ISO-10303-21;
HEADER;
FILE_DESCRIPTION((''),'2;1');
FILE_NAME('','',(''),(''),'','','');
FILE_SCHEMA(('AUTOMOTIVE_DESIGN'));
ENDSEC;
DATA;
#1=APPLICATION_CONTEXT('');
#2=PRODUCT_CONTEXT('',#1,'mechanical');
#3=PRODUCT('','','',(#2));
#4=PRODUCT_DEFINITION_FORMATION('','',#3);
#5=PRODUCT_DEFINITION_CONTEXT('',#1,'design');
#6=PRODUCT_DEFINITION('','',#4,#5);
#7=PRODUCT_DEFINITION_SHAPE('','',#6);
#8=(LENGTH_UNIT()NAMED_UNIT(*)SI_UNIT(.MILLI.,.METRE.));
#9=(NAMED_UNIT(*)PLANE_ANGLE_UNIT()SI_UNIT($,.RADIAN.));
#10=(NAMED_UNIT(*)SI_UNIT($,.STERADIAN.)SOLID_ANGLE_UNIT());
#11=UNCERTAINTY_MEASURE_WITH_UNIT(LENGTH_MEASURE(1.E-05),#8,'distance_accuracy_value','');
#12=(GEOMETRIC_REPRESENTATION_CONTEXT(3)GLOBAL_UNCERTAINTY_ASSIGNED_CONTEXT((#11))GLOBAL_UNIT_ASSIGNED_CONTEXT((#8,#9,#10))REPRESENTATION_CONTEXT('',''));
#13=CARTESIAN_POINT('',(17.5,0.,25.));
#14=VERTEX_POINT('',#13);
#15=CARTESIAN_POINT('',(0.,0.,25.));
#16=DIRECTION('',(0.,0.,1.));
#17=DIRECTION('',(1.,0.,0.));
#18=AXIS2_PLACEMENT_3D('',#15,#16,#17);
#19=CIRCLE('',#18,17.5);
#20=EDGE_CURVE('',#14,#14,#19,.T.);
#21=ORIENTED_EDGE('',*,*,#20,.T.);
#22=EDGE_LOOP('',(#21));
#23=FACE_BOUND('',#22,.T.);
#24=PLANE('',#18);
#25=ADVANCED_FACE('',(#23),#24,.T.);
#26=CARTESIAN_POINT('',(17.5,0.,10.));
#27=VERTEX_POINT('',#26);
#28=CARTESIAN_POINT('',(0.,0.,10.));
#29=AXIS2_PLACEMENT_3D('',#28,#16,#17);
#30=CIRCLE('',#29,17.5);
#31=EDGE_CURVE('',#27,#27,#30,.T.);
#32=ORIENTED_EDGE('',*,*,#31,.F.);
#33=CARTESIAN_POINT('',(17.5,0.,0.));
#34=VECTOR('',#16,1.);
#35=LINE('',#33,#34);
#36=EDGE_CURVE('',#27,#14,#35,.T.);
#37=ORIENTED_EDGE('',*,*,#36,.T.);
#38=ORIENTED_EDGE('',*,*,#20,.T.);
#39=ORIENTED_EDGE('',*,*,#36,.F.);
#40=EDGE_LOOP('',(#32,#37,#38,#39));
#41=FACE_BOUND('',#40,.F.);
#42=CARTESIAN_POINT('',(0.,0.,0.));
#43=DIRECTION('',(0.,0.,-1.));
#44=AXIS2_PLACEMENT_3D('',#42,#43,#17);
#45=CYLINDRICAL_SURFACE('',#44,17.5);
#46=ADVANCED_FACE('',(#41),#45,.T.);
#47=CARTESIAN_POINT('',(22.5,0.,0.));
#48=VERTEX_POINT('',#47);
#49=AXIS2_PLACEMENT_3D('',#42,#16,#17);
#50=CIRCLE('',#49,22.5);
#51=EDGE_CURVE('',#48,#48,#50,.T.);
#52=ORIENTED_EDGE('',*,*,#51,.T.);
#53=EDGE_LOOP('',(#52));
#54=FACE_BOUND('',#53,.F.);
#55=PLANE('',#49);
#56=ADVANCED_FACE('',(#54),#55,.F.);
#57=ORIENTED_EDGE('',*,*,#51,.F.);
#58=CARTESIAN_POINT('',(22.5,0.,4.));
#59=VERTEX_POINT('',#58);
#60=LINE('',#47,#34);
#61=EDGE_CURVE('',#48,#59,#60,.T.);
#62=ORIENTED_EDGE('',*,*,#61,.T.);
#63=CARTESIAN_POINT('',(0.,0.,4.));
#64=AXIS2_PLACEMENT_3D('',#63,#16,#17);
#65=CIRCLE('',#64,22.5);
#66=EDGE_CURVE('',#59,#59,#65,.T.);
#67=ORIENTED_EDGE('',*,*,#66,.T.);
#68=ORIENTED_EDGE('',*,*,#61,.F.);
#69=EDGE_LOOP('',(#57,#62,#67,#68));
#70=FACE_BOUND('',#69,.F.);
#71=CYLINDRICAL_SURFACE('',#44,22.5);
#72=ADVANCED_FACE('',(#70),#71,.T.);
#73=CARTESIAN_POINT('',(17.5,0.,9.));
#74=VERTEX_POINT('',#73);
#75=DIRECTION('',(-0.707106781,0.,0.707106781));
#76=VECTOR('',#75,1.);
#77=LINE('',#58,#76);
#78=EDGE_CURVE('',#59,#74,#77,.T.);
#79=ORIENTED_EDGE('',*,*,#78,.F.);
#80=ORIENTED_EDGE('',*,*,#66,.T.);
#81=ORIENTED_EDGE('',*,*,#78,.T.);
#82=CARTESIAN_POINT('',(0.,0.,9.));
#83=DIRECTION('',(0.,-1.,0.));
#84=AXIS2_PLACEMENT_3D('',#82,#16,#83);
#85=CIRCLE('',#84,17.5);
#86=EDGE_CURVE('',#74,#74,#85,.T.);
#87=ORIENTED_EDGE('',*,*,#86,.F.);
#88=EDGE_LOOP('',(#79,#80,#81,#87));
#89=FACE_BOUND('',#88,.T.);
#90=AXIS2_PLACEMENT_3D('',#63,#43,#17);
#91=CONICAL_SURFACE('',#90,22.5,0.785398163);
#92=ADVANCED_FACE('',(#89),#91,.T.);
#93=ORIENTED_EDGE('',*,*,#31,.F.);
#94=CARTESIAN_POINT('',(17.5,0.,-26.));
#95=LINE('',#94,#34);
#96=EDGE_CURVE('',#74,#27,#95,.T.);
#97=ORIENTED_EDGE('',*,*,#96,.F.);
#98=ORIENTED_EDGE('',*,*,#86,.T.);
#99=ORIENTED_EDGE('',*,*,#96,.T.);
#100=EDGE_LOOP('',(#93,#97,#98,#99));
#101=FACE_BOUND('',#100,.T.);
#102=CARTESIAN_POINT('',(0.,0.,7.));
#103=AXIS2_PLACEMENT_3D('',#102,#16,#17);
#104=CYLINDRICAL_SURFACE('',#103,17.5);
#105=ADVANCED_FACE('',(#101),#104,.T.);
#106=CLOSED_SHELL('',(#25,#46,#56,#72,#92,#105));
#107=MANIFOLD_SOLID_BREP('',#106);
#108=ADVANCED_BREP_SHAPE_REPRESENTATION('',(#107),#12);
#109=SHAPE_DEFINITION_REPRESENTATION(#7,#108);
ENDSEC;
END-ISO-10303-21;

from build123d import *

# Parameters (mm, degrees)
F0_R        = 22.5
F0_R_2      = 17.5
F1_DEPTH    = 10
F2_DEPTH    = 25
F3_S5_R     = 17.5
F3_T6_DEPTH = 33


# Not quite as in the source:
# - a fillet or chamfer that OpenCascade refuses, or shapes differently, is made with other operations: its cross-section is extruded or revolved along the edge and cut away or added


with BuildPart() as f1:
    # F0 (on Top) → F1 (new body)
    with BuildSketch(Plane.XY):
        Circle(F0_R)
        Circle(F0_R_2, mode=Mode.SUBTRACT)
    extrude(amount=F1_DEPTH)

    # F0 (on Top) → F2 (join)
    with BuildSketch(Plane.XY):
        Circle(F0_R_2)
    extrude(amount=F2_DEPTH)

    # F3: chamfer of 6 on 1 edges, made by hand


with BuildPart() as f3_tool2:
    # F3_s3 → F3_t4 (revolve)
    with BuildSketch(Plane.XZ):
        Polygon((22.5, 4), (16.5, 10), (22.5, 10), align=None)
    revolve(axis=Axis((0, 0, 10), (0, 0, 1)))

    # F3_s5 → F3_t6 (cut, symmetric)
    with BuildSketch(Plane.XY.offset(7)):
        Circle(F3_S5_R)
    extrude(amount=F3_T6_DEPTH, both=True, mode=Mode.SUBTRACT)


with BuildPart() as f1_1:
    add(f1.part)

    # F3_t1: cut F3_tool2
    add(f3_tool2.part, mode=Mode.SUBTRACT)


solid = f1_1.part
